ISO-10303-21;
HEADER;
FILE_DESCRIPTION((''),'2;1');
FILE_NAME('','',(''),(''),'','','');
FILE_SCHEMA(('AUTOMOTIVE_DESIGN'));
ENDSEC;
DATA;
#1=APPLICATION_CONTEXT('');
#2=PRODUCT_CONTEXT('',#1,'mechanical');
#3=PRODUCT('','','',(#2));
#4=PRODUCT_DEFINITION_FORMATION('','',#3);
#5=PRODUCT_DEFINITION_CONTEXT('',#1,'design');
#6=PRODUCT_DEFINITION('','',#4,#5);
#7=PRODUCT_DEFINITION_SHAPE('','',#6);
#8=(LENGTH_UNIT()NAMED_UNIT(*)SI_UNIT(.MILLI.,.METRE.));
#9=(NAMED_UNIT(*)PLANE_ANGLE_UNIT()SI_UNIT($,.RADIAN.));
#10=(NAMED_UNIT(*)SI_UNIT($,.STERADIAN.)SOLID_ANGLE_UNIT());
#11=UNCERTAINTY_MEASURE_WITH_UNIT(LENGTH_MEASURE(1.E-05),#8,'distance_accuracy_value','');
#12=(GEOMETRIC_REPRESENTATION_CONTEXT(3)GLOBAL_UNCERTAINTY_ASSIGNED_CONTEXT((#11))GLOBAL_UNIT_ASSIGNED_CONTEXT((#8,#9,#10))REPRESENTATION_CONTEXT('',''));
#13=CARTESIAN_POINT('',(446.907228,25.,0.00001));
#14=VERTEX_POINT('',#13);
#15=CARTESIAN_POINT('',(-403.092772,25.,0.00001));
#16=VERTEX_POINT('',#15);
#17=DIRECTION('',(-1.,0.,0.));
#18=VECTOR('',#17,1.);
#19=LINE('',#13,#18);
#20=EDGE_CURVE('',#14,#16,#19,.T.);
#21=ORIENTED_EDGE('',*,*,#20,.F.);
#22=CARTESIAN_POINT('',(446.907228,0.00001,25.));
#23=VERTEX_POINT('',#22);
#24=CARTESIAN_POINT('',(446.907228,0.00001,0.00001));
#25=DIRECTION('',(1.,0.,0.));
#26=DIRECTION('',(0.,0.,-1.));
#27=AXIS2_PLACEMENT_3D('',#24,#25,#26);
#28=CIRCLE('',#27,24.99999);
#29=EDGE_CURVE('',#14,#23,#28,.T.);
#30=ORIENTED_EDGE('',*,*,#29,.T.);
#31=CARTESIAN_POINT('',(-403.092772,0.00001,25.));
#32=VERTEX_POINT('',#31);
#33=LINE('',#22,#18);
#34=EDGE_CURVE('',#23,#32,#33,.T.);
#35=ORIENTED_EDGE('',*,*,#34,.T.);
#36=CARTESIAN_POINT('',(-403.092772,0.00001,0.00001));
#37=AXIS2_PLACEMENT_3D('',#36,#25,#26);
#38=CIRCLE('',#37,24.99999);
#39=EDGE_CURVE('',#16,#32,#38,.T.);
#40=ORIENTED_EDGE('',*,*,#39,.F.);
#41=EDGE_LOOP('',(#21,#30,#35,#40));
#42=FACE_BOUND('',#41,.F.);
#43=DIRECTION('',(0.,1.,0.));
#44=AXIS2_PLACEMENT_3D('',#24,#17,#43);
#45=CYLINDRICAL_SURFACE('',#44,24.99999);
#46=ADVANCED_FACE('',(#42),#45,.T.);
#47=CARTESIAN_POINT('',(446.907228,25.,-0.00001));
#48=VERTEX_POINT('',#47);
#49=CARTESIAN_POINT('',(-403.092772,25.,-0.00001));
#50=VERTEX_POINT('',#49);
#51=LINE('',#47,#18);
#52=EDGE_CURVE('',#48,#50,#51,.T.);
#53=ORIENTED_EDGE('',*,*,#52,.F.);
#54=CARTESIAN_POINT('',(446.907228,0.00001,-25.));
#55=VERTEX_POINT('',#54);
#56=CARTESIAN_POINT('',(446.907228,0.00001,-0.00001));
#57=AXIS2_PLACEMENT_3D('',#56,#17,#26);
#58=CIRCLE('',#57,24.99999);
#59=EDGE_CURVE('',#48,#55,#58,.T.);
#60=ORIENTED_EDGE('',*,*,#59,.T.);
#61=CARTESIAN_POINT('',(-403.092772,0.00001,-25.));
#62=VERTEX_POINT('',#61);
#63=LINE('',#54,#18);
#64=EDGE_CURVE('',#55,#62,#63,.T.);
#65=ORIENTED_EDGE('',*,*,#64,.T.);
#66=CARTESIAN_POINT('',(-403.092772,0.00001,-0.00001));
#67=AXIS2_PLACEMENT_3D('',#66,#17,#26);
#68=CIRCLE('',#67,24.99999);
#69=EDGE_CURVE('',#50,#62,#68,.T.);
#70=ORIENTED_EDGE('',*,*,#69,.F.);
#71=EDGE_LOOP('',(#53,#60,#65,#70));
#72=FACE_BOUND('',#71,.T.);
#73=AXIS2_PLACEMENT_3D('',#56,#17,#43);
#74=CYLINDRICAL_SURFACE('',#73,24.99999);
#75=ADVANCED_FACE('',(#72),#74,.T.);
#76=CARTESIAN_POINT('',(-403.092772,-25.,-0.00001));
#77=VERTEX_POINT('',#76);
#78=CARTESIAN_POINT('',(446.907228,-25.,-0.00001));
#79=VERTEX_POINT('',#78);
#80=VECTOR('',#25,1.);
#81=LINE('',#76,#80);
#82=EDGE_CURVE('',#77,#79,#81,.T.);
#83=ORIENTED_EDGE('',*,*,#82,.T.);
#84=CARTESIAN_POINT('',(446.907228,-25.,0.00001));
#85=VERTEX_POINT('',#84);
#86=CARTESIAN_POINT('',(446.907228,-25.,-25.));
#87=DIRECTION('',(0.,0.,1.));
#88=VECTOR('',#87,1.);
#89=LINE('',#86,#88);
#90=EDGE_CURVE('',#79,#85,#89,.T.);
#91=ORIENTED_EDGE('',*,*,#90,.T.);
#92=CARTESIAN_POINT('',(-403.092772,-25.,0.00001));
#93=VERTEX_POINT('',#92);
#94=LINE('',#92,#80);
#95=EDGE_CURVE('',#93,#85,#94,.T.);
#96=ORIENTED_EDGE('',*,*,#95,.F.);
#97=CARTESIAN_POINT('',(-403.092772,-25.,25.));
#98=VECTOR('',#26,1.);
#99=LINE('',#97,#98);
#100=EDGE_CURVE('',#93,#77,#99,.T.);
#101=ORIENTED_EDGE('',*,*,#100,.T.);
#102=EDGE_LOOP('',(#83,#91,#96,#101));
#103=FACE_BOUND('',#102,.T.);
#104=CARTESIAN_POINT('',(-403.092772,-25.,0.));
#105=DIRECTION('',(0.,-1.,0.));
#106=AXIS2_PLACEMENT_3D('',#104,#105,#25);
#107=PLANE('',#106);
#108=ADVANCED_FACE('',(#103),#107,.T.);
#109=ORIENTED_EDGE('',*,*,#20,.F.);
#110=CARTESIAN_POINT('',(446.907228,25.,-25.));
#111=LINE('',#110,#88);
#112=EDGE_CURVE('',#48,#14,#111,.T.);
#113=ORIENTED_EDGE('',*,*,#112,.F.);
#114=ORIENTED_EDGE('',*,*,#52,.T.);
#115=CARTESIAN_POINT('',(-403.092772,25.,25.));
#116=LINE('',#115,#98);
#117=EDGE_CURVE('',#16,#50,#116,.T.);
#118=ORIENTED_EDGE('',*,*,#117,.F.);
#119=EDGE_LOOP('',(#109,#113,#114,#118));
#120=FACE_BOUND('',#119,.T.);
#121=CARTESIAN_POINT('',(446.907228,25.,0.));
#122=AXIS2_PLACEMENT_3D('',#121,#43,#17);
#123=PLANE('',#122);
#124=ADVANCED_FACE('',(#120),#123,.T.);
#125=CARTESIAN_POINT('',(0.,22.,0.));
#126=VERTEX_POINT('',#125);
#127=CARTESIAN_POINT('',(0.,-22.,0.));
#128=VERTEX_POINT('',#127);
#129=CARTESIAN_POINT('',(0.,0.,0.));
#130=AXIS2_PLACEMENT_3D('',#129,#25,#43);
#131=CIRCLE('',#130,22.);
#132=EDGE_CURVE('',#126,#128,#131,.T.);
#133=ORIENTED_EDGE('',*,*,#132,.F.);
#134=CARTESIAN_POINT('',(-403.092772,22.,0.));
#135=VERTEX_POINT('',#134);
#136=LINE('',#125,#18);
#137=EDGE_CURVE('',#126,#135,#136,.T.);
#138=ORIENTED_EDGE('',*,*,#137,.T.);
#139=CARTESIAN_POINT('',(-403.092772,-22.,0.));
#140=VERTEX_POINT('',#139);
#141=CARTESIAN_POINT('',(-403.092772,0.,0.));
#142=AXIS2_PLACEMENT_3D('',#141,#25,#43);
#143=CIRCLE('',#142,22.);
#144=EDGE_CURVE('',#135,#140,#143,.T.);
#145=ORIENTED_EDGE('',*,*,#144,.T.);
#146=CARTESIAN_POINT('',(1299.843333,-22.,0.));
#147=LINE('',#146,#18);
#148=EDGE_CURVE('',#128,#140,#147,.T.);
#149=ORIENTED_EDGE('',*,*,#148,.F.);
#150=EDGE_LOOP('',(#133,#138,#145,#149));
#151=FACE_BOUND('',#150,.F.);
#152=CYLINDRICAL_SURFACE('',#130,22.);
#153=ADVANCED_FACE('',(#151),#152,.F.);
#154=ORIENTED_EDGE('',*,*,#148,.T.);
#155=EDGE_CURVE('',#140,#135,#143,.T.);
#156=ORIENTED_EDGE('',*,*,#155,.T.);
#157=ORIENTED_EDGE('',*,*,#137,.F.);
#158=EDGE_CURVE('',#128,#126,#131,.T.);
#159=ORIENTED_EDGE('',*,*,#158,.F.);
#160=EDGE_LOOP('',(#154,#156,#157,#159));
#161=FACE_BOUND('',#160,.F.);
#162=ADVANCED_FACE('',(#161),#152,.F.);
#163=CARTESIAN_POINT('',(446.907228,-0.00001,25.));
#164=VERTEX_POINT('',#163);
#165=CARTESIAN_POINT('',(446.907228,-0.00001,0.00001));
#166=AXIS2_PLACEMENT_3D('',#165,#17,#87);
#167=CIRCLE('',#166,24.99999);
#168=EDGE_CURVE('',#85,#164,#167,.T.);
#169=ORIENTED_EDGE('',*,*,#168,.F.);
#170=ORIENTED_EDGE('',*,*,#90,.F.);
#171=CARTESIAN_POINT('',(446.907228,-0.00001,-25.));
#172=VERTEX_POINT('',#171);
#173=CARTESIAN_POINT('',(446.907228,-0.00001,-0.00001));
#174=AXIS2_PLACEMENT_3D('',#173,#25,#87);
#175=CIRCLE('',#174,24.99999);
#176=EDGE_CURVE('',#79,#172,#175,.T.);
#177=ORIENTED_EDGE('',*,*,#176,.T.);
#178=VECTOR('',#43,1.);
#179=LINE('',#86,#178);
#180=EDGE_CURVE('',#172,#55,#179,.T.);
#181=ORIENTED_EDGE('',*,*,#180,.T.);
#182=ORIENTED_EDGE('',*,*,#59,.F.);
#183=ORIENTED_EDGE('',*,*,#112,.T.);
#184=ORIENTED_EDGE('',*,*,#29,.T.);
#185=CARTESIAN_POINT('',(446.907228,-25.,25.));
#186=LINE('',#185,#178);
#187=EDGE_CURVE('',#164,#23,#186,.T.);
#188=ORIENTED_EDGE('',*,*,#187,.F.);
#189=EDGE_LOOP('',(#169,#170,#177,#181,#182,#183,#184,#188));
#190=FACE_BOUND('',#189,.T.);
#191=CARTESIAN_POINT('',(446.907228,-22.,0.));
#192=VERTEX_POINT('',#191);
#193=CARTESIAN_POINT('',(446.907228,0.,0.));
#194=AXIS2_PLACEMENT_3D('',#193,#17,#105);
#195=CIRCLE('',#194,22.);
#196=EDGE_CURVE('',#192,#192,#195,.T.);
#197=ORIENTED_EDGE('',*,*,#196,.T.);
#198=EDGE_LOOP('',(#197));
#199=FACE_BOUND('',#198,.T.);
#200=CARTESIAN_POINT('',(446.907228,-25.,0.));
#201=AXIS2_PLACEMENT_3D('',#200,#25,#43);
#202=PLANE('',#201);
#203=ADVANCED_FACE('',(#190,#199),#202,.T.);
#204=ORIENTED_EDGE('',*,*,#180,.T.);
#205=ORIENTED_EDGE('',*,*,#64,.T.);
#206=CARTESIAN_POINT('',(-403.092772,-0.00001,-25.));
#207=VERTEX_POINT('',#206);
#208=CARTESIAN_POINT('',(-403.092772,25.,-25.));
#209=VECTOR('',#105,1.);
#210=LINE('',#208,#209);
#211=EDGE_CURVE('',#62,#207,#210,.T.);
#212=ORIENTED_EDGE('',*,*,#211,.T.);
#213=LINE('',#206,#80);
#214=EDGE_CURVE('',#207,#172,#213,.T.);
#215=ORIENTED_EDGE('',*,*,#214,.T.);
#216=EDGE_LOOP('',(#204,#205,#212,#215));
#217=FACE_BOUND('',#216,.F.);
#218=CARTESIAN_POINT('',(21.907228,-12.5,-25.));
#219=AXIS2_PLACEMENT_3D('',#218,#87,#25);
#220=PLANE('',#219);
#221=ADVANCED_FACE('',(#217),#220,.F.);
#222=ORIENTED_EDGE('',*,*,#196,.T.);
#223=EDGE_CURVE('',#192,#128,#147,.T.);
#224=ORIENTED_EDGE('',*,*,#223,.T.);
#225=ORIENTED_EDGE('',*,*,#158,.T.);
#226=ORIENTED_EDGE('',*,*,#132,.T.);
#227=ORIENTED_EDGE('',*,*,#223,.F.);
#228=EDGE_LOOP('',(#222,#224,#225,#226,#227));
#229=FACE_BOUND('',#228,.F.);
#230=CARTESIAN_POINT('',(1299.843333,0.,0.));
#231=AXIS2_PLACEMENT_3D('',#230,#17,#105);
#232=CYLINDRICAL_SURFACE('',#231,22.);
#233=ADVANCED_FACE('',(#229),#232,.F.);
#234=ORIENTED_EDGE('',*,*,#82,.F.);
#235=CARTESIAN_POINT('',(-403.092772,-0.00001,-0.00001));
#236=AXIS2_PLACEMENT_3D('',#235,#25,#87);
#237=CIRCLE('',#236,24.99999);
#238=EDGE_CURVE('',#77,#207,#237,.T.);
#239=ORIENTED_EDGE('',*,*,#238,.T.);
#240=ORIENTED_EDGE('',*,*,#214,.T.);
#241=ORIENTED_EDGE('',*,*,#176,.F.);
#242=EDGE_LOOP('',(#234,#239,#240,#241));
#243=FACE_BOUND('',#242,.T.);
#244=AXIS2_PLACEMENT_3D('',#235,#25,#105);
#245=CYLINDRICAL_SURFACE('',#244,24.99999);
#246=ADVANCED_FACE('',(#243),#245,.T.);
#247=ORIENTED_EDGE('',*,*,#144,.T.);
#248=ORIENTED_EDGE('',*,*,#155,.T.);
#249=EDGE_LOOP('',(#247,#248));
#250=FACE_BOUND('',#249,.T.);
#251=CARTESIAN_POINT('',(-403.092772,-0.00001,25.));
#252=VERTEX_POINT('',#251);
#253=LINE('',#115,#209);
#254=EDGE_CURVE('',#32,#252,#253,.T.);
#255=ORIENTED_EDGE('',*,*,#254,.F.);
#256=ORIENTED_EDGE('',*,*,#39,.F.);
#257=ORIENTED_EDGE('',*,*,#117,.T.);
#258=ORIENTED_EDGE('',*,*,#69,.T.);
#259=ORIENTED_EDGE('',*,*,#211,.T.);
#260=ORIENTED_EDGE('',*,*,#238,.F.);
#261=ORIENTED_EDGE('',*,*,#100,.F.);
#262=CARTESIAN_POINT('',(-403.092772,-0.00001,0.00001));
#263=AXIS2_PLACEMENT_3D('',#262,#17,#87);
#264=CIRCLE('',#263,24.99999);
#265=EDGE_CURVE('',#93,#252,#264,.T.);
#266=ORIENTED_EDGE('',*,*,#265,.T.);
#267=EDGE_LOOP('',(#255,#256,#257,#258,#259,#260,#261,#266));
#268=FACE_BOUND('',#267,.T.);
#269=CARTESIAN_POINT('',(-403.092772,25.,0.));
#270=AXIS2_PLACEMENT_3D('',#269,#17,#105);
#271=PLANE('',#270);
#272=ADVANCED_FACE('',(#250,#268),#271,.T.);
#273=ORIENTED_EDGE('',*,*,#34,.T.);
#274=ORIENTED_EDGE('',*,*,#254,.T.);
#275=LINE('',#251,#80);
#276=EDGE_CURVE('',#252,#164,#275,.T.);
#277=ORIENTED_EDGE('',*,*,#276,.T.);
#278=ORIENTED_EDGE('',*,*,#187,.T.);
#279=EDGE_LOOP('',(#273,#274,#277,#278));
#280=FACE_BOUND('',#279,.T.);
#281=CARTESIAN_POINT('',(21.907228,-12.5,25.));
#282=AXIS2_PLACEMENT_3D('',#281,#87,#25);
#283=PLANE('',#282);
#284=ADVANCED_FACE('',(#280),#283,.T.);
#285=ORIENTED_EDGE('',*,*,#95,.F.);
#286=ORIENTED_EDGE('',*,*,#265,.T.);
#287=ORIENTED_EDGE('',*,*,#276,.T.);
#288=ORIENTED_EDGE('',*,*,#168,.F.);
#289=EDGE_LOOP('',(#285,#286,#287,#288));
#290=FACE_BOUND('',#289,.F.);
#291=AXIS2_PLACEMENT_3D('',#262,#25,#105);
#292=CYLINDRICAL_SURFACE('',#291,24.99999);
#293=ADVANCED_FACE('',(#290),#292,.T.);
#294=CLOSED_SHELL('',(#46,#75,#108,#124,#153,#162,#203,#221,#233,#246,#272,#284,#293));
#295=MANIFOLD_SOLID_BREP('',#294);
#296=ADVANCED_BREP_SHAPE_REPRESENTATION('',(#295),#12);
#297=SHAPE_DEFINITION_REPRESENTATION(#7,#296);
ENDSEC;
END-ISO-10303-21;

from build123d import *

# Parameters (mm, degrees)
F1_DEPTH = 25
F2_R     = 24.99999
F4_D     = 44
F4_DEPTH = 403.0937720853
F6_D     = 44


# Not quite as in the source:
# - a fillet or chamfer is up to 0.001 mm smaller than in the source, because OpenCascade refuses the exact size


with BuildPart() as f1:
    # F0 (on Top) → F1 (new body, symmetric)
    with BuildSketch(Plane.XY):
        Polygon((446.9072279147, 0), (0, 0), (-403.0927720853, 0), (-403.0927720853, -25), (446.9072279147, -25), align=None)
        Polygon((-403.0927720853, 0), (0, 0), (446.9072279147, 0), (446.9072279147, 25), (-403.0927720853, 25), align=None)
    extrude(amount=F1_DEPTH, both=True)

    # F2 (radius 25 in the source; OpenCascade refuses exactly that, so slightly less here)
    f2_edges = [f1.edges().sort_by_distance(p)[0] for p in [
        (21.907228, -25, -25),
        (21.907228, 25, -25),
        (21.907228, 25, 25),
        (21.907228, -25, 25),
    ]]
    fillet(f2_edges, radius=F2_R)

    # F4 (through all, one way)
    with BuildSketch(Plane.YZ):
        with Locations((0, 0)):
            Circle(F4_D / 2)
    extrude(amount=-F4_DEPTH, mode=Mode.SUBTRACT)

    # F6 (through all)
    with Locations(Plane.YZ.offset(446.9072279147)):
        with Locations((0, 0)):
            Hole(F6_D / 2)


solid = f1.part
